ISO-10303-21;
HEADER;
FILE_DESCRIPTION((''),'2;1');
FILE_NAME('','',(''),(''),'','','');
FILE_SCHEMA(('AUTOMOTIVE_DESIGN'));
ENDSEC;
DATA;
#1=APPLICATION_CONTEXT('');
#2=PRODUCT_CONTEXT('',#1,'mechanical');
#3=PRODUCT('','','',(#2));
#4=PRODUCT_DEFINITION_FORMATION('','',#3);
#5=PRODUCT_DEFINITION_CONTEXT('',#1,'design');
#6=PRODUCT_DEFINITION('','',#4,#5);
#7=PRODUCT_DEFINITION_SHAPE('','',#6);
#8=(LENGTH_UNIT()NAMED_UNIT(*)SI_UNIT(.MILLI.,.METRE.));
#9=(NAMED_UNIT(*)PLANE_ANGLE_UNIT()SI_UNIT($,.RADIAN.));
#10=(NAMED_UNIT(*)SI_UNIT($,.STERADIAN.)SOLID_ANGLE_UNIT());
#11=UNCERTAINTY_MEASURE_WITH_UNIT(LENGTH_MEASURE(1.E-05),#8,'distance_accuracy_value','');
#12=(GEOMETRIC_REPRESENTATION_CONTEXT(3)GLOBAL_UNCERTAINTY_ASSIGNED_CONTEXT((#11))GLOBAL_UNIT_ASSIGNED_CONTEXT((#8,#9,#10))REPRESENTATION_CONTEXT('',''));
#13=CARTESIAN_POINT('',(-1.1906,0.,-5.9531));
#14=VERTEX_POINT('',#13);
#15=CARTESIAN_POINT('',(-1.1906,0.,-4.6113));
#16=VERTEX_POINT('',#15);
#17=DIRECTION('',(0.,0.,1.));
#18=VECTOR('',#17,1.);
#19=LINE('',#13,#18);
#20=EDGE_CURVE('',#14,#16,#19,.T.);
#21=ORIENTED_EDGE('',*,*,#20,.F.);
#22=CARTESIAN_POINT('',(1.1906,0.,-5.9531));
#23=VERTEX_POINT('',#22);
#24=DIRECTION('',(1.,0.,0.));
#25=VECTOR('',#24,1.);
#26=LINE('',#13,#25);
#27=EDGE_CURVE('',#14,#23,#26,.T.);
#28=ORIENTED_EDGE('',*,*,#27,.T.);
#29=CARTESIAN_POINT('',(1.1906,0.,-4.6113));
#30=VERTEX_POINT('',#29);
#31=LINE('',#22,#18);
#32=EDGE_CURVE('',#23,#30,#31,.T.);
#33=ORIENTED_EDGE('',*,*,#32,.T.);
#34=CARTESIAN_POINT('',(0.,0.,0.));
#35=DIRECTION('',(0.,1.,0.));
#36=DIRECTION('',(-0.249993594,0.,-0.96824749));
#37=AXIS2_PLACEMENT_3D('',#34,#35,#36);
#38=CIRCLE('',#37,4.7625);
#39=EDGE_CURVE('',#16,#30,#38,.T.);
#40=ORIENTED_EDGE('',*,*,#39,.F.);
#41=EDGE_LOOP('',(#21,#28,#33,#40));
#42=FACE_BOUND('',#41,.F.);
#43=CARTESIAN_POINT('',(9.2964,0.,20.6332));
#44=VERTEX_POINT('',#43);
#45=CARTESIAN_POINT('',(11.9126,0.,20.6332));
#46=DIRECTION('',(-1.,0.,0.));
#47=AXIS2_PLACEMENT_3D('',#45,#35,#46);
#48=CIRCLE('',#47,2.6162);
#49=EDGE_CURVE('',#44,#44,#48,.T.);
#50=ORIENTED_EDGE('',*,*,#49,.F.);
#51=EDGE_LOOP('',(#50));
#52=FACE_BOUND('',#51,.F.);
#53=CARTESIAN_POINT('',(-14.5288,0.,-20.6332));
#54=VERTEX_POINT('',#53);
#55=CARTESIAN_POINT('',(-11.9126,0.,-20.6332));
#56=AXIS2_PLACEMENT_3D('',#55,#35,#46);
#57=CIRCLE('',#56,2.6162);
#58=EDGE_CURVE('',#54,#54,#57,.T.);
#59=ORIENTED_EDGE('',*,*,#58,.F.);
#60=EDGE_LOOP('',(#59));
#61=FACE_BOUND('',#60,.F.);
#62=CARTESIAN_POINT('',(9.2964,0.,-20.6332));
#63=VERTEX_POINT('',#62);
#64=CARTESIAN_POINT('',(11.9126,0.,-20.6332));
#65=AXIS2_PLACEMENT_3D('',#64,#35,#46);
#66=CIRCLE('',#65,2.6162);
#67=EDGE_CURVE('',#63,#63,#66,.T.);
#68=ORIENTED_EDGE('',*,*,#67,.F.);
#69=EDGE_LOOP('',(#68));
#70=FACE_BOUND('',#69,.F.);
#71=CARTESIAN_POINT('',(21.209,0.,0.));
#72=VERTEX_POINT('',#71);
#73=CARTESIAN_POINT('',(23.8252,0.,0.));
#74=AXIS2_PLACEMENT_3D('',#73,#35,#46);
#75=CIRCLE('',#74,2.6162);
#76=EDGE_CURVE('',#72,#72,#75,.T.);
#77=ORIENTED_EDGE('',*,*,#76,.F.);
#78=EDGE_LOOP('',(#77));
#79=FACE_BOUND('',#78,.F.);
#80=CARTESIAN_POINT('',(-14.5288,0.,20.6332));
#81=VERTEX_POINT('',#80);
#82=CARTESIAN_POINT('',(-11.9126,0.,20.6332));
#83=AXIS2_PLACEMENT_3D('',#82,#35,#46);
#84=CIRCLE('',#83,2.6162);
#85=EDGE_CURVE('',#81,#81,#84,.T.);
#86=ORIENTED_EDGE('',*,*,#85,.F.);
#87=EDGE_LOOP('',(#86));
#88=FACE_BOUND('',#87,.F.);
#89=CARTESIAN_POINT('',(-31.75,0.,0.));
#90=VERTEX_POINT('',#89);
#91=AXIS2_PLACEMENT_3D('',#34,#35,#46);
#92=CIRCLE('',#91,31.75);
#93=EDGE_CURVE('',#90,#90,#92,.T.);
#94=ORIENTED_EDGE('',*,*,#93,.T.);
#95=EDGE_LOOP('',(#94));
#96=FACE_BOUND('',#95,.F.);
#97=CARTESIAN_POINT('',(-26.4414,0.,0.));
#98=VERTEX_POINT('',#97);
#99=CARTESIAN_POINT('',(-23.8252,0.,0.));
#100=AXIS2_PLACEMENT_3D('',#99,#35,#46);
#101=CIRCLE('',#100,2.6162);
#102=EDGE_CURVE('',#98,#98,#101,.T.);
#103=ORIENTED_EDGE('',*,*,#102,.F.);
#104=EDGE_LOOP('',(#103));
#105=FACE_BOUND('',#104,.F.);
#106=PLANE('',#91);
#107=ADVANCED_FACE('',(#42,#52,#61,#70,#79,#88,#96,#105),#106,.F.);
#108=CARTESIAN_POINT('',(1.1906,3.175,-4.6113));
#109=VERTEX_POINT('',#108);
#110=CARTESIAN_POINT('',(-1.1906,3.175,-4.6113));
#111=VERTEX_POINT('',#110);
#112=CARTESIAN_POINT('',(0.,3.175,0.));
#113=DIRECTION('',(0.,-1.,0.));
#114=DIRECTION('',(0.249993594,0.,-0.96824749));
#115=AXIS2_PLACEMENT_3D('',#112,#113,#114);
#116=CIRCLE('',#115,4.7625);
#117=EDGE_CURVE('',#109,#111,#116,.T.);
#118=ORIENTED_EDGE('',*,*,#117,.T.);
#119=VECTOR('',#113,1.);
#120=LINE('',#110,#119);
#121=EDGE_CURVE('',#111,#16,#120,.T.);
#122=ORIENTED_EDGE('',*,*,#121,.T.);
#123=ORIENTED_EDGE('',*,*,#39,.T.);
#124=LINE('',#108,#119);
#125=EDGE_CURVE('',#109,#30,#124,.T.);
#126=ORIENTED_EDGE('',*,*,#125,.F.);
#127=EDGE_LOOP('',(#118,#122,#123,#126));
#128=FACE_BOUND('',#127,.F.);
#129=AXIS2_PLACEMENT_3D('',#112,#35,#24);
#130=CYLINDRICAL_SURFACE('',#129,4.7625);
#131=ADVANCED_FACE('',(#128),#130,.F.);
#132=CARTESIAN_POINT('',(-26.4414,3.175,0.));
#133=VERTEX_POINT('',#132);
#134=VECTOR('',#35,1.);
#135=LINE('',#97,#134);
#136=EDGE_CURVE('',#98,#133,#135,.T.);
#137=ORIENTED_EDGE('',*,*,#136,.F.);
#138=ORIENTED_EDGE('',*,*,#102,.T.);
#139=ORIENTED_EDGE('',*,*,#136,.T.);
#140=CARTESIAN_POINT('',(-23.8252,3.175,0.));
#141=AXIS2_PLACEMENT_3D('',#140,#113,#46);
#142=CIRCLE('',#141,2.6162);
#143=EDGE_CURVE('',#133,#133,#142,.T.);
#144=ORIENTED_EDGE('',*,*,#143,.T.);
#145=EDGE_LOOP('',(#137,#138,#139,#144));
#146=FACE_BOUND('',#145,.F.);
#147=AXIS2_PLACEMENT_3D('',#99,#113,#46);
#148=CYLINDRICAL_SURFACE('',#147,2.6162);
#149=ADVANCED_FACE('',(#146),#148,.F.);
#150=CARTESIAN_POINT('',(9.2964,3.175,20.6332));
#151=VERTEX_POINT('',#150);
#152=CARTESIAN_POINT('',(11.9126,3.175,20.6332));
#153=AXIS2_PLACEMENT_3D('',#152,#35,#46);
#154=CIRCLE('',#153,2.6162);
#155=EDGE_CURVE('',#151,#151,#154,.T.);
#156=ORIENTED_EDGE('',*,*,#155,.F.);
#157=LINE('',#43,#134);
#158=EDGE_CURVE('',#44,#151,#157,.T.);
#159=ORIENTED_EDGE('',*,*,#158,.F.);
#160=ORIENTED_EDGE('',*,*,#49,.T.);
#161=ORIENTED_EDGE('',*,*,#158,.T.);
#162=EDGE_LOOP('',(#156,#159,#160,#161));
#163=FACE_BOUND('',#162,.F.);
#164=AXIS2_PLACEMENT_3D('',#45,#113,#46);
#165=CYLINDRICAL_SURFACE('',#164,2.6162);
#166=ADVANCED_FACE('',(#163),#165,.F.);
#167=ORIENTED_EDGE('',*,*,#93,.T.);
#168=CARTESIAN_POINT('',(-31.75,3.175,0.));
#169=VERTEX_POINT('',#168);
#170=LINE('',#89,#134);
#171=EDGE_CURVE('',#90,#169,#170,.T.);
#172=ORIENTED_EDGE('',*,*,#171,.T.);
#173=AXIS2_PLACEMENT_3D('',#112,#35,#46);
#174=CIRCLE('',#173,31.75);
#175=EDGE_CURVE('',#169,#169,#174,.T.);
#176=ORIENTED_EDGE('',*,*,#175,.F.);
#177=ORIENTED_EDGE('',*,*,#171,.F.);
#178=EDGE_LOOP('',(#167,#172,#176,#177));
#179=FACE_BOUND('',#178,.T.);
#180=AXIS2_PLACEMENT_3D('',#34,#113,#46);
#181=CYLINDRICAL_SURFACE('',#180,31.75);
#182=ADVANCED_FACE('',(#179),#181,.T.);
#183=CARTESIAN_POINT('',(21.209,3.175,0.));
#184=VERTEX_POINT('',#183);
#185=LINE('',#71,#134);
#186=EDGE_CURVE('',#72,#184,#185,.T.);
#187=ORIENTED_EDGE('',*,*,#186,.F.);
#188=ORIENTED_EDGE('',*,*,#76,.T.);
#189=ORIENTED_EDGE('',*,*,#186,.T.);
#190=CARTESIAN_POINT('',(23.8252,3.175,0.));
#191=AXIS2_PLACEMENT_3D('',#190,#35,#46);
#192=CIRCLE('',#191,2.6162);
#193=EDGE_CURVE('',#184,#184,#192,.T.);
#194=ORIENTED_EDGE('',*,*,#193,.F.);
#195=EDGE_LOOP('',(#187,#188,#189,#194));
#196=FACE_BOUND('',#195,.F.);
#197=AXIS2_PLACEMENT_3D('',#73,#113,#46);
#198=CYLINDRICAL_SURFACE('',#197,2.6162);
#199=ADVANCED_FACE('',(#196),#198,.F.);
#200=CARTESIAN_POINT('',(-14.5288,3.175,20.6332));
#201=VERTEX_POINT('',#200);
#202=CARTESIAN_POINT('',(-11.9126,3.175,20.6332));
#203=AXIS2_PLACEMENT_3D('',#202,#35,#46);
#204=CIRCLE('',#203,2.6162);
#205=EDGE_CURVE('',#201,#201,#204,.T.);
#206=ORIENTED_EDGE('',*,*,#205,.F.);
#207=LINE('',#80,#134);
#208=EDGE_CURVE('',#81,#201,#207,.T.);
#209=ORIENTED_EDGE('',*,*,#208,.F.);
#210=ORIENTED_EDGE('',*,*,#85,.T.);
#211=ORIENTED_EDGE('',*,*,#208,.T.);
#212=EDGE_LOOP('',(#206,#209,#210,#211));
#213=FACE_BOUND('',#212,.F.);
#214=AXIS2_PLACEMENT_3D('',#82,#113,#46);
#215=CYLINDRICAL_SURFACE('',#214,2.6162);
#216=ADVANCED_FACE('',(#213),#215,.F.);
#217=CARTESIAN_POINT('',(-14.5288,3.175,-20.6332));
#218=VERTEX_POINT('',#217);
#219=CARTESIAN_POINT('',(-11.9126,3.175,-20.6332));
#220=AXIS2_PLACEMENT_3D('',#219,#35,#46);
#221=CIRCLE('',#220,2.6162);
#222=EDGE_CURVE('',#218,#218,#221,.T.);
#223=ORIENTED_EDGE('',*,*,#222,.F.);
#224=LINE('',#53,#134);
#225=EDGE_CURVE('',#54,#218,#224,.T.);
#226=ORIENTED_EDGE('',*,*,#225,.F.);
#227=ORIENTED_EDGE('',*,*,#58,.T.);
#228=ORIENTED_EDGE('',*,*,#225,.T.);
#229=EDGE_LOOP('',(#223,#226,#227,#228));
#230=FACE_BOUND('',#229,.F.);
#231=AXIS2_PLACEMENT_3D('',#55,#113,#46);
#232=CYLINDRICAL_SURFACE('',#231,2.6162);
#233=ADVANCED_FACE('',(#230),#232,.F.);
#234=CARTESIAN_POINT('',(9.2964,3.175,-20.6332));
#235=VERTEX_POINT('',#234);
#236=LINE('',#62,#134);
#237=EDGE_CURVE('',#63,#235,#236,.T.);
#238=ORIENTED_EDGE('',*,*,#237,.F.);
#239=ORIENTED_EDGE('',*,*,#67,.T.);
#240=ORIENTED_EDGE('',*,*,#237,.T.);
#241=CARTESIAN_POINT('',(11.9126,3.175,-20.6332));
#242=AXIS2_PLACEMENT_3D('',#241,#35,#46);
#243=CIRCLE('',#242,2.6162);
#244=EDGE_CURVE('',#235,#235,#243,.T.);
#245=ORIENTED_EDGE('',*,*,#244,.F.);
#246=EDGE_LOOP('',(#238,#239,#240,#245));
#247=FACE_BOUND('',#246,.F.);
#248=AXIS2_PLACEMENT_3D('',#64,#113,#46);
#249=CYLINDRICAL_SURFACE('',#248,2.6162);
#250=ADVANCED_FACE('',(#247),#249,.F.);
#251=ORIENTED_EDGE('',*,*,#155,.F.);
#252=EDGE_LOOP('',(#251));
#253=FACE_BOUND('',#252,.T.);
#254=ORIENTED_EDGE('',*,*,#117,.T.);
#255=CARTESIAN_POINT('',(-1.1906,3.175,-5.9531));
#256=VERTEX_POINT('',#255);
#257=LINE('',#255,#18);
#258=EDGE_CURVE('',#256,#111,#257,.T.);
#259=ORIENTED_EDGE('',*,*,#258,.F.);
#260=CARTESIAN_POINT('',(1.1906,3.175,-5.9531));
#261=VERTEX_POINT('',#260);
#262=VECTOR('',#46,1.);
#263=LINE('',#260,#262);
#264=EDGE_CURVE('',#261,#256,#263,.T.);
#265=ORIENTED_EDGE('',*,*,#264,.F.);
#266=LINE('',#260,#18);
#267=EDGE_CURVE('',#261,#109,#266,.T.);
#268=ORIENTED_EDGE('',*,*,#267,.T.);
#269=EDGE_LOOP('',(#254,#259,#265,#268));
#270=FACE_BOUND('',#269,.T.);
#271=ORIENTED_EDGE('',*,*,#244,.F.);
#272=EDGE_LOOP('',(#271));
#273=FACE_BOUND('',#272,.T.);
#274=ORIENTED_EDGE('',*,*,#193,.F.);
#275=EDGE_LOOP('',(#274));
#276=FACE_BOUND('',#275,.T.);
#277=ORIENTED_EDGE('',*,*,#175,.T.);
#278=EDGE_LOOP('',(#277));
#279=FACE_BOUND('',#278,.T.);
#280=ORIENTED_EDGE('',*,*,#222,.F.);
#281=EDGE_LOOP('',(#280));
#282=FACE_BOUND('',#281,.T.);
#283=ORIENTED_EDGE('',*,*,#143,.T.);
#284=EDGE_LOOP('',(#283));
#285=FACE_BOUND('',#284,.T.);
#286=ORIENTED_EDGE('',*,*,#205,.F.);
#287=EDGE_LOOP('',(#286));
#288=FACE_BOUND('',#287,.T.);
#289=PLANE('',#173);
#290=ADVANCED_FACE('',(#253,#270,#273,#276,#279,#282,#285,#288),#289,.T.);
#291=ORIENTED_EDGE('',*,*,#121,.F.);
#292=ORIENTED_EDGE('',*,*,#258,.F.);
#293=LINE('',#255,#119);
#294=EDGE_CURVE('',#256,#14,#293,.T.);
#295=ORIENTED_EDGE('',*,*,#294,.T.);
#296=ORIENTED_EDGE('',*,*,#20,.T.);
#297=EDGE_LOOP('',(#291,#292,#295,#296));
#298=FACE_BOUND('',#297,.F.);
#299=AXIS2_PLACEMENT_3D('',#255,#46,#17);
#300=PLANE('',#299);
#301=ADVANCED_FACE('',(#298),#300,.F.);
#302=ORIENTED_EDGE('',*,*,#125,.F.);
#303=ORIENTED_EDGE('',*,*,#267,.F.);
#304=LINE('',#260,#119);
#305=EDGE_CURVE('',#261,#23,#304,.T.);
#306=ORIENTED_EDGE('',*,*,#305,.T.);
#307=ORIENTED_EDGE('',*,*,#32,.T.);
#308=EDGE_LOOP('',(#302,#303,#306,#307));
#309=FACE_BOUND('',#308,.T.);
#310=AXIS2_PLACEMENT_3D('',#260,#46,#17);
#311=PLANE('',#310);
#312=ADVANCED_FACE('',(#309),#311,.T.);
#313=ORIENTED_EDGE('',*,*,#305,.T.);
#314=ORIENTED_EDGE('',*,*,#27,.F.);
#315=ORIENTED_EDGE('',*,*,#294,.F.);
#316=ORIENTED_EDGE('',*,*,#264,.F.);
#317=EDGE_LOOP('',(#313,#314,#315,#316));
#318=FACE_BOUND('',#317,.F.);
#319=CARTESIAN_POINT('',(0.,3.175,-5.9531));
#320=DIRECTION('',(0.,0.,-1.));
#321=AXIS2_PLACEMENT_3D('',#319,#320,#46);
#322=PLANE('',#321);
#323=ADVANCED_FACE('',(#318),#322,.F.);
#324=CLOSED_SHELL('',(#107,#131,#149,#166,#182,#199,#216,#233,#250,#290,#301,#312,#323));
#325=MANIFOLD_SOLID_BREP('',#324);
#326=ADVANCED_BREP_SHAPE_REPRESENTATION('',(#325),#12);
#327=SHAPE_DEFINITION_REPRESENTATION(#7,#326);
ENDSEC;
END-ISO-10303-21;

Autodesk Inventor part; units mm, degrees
ref_plane "YZ Plane" through (0, 0, 0) normal (1, 0, 0) x (0, 1, 0)
ref_plane "XZ Plane" through (0, 0, 0) normal (0, 1, 0) x (-1, 0, 0)
ref_plane "XY Plane" through (0, 0, 0) normal (0, 0, 1) x (1, 0, 0)
sketch "Sketch1" plane through (0, 0, 0) normal (0, 1, 0) x (-1, 0, 0)
  circle A0 centre (0, 0) radius 31.75
  line L0 (0, 0) -> (23.8252, 0)
  circle A1 centre (23.8252, 0) radius 2.6162
  circle A2 centre (11.9126, 20.6332) radius 2.6162
  circle A3 centre (-11.9126, 20.6332) radius 2.6162
  circle A4 centre (-23.8252, 0) radius 2.6162
  circle A5 centre (-11.9126, -20.6332) radius 2.6162
  circle A6 centre (11.9126, -20.6332) radius 2.6162
  dimension "d0" = 63.5
  dimension "d1" = 23.8252
  dimension "d2" = 5.2324
  dimension "d5" = 360
extrude "Plate1" add sketch "Sketch1" along normal blind 3.175
sketch "Sketch2" plane through (0, 3.175, 0) normal (0, 1, 0) x (1, 0, 0)
  circle A0 centre (0, 0) radius 31.75 projected
  circle A1 centre (0, 0) radius 4.7625
  line L0 (0, 4.7625) -> (0, 4.2799)
  line L1 (1.1906, 4.2799) -> (1.1906, 4.6113)
  line L2 (-1.1906, 4.2799) -> (-1.1906, 4.6113)
  line L3 (0, 4.7625) -> (0, 5.9531)
  line L4 (0, 5.9531) -> (1.1906, 5.9531)
  line L5 (1.1906, 5.9531) -> (1.1906, 4.6113)
  line L6 (0, 5.9531) -> (-1.1906, 5.9531)
  line L7 (-1.1906, 5.9531) -> (-1.1906, 4.6113)
  dimension "d8" = 9.525
  dimension "d9" = 0.4826
  dimension "d10" = 1.1906
  dimension "d11" = 2.3813
  dimension "d12" = 1.1906
extrude "Cut1" cut sketch "Sketch2" against normal blind 3.175 contours A1 | A1 L3 L4 L5 | L7 L6 L3 A1
equation "\"d13\" = Thickness"
equation "\"BendRadius\" = Thickness"
equation "\"BendReliefWidth\" = Thickness"
equation "\"BendReliefDepth\" = 0.5 * Thickness"
equation "\"CornerReliefSize\" = 4 * Thickness"
equation "\"MinimumRemnant\" = 2 * Thickness"
equation "\"TransitionRadius\" = BendRadius"
equation "\"JacobiRadiusSize\" = BendRadius"
equation "\"GapSize\" = Thickness"
equation "\"d7\" = BendRadius"
equation "\"Thickness\" = 3.175"
properties part number "Fitting piece for Sprocket"
